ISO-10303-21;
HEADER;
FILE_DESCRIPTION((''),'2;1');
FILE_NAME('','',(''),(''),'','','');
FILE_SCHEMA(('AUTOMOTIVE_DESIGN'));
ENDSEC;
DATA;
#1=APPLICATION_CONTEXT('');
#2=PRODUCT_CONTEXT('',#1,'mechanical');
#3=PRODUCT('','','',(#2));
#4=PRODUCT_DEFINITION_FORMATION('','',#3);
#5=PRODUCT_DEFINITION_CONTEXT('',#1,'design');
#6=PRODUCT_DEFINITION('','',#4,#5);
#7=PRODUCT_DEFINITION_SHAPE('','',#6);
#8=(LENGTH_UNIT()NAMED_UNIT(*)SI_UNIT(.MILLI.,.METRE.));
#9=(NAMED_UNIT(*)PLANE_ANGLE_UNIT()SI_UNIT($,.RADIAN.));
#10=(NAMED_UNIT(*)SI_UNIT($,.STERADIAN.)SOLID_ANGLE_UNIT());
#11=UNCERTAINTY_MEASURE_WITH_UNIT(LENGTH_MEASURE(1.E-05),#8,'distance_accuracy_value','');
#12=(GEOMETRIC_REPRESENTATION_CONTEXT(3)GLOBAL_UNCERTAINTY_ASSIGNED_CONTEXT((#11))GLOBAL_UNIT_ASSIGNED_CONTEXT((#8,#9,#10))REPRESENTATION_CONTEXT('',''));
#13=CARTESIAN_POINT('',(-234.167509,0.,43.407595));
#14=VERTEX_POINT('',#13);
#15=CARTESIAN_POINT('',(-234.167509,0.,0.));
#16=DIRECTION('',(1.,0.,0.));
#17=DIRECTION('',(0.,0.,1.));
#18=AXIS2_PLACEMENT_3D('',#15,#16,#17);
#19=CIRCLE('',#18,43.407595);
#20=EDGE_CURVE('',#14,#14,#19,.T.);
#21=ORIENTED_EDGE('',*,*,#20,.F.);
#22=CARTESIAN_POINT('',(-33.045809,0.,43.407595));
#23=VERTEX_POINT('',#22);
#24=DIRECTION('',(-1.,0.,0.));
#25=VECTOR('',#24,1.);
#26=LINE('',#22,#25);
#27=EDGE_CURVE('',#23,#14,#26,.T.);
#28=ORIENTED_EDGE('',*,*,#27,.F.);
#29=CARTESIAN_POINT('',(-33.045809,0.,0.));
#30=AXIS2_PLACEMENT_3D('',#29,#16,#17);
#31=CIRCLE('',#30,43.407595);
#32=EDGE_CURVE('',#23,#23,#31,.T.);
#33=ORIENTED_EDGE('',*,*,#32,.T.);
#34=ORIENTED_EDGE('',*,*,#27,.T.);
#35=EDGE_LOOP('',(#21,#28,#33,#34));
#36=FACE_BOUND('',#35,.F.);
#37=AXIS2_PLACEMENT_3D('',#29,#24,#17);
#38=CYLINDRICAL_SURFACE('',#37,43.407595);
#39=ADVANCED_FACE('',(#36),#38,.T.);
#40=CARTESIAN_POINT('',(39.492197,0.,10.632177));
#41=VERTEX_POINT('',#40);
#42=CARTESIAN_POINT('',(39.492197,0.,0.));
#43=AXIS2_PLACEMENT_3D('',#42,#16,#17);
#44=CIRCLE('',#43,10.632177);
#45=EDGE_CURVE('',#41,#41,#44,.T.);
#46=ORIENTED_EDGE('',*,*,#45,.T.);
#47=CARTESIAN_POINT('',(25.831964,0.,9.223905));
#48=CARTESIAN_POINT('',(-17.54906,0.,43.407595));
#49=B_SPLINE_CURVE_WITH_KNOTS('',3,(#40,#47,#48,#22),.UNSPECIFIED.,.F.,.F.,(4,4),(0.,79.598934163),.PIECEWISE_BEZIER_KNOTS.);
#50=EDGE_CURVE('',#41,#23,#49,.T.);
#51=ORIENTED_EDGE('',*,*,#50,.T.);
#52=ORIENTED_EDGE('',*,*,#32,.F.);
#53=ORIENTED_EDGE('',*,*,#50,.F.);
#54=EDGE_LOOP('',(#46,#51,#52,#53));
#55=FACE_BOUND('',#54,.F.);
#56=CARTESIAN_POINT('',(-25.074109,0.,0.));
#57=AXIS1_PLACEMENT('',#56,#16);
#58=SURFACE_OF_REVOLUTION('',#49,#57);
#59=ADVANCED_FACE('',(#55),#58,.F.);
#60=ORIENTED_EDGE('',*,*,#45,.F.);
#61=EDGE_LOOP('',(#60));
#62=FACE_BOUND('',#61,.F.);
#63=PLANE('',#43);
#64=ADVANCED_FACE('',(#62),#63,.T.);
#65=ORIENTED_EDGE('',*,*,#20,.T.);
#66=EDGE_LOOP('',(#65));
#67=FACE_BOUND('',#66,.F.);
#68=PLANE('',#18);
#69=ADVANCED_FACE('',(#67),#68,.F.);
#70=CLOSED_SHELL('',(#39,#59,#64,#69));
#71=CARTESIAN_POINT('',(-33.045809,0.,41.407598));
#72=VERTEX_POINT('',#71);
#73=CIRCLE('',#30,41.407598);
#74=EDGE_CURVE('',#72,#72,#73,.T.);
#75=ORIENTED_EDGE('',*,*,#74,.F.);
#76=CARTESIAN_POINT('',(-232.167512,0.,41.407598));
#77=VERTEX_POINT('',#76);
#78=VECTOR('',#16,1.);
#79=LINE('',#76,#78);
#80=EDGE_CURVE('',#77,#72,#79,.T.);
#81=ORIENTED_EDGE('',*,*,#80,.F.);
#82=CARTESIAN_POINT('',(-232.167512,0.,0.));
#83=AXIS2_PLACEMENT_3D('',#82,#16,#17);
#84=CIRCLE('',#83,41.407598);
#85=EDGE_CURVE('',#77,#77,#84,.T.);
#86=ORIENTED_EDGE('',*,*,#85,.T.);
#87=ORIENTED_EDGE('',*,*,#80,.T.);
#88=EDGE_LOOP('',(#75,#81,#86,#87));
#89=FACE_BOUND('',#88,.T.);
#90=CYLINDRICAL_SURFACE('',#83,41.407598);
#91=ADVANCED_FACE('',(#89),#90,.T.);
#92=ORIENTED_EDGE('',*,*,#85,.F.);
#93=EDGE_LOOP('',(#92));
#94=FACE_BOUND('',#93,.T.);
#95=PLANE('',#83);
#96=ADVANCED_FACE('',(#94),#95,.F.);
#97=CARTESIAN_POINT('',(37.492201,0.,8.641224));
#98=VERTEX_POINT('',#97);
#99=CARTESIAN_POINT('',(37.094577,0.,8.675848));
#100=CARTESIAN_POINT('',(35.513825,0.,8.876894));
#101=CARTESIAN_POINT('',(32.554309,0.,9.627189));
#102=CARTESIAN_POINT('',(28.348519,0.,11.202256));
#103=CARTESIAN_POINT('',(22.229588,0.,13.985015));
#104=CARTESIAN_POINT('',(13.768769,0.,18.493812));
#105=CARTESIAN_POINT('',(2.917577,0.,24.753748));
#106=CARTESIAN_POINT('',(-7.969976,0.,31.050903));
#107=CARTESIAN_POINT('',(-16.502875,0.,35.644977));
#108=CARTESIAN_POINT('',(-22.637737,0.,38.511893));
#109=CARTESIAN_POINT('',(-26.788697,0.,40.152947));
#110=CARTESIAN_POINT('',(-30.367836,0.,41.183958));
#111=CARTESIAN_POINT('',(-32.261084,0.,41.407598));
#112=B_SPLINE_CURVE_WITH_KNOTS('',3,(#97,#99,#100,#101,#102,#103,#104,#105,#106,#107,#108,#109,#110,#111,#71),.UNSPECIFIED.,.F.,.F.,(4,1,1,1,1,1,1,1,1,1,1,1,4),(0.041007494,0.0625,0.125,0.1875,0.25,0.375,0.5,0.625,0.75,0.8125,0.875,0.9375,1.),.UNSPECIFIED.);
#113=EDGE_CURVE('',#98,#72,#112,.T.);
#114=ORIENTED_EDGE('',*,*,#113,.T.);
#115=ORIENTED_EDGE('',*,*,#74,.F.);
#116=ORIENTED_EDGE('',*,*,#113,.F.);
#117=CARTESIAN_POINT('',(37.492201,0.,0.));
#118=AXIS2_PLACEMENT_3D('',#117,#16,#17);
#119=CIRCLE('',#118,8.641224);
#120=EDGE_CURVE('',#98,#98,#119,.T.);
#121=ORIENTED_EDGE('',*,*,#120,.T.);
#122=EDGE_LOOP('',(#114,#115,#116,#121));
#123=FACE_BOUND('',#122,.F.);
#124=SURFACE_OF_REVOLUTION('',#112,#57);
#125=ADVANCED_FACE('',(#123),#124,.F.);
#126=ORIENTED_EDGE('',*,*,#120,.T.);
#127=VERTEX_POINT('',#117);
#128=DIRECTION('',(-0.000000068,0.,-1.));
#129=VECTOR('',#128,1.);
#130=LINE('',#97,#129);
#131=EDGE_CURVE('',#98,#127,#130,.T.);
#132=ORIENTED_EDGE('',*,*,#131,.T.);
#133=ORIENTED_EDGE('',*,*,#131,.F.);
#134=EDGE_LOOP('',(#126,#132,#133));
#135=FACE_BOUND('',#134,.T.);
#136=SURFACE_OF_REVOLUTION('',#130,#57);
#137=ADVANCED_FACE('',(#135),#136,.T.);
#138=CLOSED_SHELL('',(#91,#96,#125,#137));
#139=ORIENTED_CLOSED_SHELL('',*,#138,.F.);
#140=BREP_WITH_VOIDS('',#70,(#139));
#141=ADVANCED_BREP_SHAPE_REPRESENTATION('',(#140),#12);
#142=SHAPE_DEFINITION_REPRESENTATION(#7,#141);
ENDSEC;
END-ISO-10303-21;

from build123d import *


# Not quite as in the source:
# - ends of sketch curves that miss each other by under 0.0002 mm in the source are joined
# - the dataset's text gives a spline's control points without its knots; the knots are read off the source's solid


with BuildPart() as f1:
    # F0 (on Front) → F1 (revolve)
    with BuildSketch(Plane.XZ):
        with BuildLine():
            Line((37.4922007322, 0), (39.4921973348, 0))
            Line((39.4921973348, 0), (39.4921973348, 10.6321773492))
            add(Edge.make_bspline(
                [(39.4921973348, 10.6321773492), (25.8319638669, 9.223905392), (-17.5490600107, 43.4075947851), (-33.0458087847, 43.4075947851)],
                knots=[0, 0, 0, 0, 79.598934163, 79.598934163, 79.598934163, 79.598934163], degree=3))
            Line((-33.0458087847, 43.4075947851), (-234.167508781, 43.4075947851))
            Line((-234.167508781, 43.4075947851), (-234.167508781, 0))
            Line((-234.167508781, 0), (-232.1675121784, 0))
            Line((-232.1675121784, 0), (-232.1675121784, 41.4075981826))
            Line((-232.1675121784, 41.4075981826), (-33.0458087847, 41.4075981826))
            add(Edge.make_bspline(
                [(37.4922013196, 8.6412238335), (37.0945770822, 8.6758484487), (35.5138249558, 8.8768940457), (32.5543086746, 9.6271891204), (28.3485189273, 11.2022557551), (22.229588287, 13.9850146115), (13.76876914, 18.4938124906), (2.9175771692, 24.7537479723), (-7.9699760264, 31.0509027544), (-16.502875169, 35.6449766342), (-22.6377369359, 38.5118930501), (-26.788697304, 40.1529468803), (-30.3678361719, 41.1839581397), (-32.2610835082, 41.4075981826), (-33.0458087847, 41.4075981826)],
                knots=[0.0410074938, 0.0410074938, 0.0410074938, 0.0410074938, 0.0625, 0.125, 0.1875, 0.25, 0.375, 0.5, 0.625, 0.75, 0.8125, 0.875, 0.9375, 1, 1, 1, 1], degree=3))
            Line((37.4922013196, 8.6412238335), (37.4922007322, 0))
        make_face()
    revolve(axis=Axis((-25.0741094351, 0, 0), (1, 0, 0)))


solid = f1.part
